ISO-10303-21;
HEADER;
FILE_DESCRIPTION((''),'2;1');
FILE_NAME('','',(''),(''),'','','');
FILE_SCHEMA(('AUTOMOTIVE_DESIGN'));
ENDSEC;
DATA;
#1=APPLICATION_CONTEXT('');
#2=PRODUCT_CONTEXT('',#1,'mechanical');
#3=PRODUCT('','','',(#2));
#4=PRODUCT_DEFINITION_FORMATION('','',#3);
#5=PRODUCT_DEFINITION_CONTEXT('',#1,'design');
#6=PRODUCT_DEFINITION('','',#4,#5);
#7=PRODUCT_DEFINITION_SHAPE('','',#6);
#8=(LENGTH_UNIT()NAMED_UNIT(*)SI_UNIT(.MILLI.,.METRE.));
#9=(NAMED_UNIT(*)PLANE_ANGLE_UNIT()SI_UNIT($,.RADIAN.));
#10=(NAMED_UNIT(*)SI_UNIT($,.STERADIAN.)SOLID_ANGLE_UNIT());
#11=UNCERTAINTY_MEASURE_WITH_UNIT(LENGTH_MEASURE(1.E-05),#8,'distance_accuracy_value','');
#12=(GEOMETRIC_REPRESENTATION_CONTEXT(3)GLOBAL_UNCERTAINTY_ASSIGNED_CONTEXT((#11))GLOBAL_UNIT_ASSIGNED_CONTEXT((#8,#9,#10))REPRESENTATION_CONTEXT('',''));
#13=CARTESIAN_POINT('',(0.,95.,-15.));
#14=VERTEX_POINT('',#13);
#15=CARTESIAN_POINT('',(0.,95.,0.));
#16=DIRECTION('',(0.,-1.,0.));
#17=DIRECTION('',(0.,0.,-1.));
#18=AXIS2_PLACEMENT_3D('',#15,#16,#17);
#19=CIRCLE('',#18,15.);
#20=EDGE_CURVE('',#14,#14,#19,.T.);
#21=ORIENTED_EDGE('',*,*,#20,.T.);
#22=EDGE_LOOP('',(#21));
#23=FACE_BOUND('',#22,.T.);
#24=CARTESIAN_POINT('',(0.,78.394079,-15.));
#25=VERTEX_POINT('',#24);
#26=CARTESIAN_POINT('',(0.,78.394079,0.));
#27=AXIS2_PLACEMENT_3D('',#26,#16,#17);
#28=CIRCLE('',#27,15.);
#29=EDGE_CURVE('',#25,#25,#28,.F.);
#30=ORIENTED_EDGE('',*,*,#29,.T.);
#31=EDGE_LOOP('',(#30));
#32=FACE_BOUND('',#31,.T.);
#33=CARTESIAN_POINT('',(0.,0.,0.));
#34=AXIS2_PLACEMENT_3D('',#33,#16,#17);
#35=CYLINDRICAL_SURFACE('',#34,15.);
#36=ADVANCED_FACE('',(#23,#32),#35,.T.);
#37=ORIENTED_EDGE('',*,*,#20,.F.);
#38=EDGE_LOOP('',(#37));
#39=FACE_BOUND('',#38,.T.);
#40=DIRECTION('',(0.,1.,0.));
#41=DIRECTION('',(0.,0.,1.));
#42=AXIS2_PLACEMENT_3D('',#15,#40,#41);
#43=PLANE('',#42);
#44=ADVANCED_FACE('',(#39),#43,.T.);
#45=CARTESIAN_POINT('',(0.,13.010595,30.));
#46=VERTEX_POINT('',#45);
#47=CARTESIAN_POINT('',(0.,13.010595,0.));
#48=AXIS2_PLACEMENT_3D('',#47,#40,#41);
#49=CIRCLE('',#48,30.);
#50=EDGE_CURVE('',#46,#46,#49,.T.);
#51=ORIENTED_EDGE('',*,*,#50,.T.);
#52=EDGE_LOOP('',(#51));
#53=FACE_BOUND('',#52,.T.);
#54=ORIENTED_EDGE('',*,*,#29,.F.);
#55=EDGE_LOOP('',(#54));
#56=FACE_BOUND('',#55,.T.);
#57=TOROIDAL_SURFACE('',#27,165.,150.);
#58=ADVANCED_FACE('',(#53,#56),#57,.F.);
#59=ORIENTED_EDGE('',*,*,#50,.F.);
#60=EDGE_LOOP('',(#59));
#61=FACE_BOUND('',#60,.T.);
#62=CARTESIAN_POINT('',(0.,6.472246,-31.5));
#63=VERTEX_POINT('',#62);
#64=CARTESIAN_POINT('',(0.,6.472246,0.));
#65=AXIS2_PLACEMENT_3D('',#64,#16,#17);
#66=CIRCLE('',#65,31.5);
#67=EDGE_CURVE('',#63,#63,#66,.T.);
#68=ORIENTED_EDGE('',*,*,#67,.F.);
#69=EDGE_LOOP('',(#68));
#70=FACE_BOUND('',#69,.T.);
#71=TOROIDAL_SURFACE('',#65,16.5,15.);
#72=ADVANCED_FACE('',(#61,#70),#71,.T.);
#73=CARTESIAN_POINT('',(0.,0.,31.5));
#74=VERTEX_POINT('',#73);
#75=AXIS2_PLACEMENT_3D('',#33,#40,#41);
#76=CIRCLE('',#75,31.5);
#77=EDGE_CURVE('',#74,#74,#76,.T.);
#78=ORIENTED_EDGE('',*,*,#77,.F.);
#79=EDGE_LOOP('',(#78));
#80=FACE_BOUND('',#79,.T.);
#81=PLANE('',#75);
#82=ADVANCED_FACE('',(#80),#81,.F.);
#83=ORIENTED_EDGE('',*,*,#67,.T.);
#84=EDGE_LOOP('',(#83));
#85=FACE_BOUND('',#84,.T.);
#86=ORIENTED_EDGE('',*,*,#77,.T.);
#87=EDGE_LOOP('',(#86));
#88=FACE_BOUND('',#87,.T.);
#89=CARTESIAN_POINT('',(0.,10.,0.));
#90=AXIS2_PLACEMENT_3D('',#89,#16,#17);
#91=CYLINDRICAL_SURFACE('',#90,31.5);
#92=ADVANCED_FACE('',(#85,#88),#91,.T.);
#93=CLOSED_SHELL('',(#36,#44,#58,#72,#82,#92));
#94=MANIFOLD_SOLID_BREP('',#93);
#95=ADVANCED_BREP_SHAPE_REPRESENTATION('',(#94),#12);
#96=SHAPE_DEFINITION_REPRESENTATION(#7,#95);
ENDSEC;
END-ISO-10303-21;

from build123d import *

# Parameters (mm, degrees)
SKETCH_1_R      = 31.5
EXTRUDE_1_DEPTH = 10
FILLET_1_R      = 150
FILLET_3_R      = 15


with BuildPart() as part:
    # 草图1 → 凸台-拉伸1 (new body)
    with BuildSketch(Plane(origin=(0, 0, 0), x_dir=(1, 0, 0), z_dir=(0, 1, 0))):
        with Locations(Location((0, 0, 0), (0, 0, 270))):
            Circle(SKETCH_1_R)
    extrude(amount=EXTRUDE_1_DEPTH)

    # 草图3 → 旋转1 (revolve)
    with BuildSketch(Plane.XY, mode=Mode.PRIVATE) as revolve_1_sk:
        Polygon((0, 95), (15, 95), (15, 25), (31.5, 10), (0, 10), align=None)
    revolve(revolve_1_sk.sketch.rotate(Axis((0, 0, 0), (0, 1, 0)), 90), axis=Axis((0, 0, 0), (0, 1, 0)))

    # 圆角1
    # the kernel refuses this fillet: 150 mm, written as the material it adds along each edge
    with BuildSketch(Plane(origin=(0, 25, 0), x_dir=(0, 0, -1), z_dir=(1, 0, 0))) as fillet_1_piece_1:
        with BuildLine():
            CenterArc((165, 53.394078691), FILLET_1_R, 180, 27.126753117)
            Line((15, 53.394078691), (12, 53.394078691))
            Line((12, 53.394078691), (12, 0))
            Line((12, 0), (12.981981618, -2.21982022))
            ThreePointArc((12.981981618, -2.21982022), (21.231981618, -9.71982022), (28.83, -16.367881574))
            Line((28.83, -16.367881574), (31.5, -15))
        make_face()
    revolve(axis=Axis((0, 25, 0), (0, 1, 0)))

    # 圆角3
    fillet_3_edges = [part.edges().sort_by_distance(p)[0] for p in [
        (-31.5, 10, 0),
    ]]
    fillet(fillet_3_edges, radius=FILLET_3_R)


solid = part.part
